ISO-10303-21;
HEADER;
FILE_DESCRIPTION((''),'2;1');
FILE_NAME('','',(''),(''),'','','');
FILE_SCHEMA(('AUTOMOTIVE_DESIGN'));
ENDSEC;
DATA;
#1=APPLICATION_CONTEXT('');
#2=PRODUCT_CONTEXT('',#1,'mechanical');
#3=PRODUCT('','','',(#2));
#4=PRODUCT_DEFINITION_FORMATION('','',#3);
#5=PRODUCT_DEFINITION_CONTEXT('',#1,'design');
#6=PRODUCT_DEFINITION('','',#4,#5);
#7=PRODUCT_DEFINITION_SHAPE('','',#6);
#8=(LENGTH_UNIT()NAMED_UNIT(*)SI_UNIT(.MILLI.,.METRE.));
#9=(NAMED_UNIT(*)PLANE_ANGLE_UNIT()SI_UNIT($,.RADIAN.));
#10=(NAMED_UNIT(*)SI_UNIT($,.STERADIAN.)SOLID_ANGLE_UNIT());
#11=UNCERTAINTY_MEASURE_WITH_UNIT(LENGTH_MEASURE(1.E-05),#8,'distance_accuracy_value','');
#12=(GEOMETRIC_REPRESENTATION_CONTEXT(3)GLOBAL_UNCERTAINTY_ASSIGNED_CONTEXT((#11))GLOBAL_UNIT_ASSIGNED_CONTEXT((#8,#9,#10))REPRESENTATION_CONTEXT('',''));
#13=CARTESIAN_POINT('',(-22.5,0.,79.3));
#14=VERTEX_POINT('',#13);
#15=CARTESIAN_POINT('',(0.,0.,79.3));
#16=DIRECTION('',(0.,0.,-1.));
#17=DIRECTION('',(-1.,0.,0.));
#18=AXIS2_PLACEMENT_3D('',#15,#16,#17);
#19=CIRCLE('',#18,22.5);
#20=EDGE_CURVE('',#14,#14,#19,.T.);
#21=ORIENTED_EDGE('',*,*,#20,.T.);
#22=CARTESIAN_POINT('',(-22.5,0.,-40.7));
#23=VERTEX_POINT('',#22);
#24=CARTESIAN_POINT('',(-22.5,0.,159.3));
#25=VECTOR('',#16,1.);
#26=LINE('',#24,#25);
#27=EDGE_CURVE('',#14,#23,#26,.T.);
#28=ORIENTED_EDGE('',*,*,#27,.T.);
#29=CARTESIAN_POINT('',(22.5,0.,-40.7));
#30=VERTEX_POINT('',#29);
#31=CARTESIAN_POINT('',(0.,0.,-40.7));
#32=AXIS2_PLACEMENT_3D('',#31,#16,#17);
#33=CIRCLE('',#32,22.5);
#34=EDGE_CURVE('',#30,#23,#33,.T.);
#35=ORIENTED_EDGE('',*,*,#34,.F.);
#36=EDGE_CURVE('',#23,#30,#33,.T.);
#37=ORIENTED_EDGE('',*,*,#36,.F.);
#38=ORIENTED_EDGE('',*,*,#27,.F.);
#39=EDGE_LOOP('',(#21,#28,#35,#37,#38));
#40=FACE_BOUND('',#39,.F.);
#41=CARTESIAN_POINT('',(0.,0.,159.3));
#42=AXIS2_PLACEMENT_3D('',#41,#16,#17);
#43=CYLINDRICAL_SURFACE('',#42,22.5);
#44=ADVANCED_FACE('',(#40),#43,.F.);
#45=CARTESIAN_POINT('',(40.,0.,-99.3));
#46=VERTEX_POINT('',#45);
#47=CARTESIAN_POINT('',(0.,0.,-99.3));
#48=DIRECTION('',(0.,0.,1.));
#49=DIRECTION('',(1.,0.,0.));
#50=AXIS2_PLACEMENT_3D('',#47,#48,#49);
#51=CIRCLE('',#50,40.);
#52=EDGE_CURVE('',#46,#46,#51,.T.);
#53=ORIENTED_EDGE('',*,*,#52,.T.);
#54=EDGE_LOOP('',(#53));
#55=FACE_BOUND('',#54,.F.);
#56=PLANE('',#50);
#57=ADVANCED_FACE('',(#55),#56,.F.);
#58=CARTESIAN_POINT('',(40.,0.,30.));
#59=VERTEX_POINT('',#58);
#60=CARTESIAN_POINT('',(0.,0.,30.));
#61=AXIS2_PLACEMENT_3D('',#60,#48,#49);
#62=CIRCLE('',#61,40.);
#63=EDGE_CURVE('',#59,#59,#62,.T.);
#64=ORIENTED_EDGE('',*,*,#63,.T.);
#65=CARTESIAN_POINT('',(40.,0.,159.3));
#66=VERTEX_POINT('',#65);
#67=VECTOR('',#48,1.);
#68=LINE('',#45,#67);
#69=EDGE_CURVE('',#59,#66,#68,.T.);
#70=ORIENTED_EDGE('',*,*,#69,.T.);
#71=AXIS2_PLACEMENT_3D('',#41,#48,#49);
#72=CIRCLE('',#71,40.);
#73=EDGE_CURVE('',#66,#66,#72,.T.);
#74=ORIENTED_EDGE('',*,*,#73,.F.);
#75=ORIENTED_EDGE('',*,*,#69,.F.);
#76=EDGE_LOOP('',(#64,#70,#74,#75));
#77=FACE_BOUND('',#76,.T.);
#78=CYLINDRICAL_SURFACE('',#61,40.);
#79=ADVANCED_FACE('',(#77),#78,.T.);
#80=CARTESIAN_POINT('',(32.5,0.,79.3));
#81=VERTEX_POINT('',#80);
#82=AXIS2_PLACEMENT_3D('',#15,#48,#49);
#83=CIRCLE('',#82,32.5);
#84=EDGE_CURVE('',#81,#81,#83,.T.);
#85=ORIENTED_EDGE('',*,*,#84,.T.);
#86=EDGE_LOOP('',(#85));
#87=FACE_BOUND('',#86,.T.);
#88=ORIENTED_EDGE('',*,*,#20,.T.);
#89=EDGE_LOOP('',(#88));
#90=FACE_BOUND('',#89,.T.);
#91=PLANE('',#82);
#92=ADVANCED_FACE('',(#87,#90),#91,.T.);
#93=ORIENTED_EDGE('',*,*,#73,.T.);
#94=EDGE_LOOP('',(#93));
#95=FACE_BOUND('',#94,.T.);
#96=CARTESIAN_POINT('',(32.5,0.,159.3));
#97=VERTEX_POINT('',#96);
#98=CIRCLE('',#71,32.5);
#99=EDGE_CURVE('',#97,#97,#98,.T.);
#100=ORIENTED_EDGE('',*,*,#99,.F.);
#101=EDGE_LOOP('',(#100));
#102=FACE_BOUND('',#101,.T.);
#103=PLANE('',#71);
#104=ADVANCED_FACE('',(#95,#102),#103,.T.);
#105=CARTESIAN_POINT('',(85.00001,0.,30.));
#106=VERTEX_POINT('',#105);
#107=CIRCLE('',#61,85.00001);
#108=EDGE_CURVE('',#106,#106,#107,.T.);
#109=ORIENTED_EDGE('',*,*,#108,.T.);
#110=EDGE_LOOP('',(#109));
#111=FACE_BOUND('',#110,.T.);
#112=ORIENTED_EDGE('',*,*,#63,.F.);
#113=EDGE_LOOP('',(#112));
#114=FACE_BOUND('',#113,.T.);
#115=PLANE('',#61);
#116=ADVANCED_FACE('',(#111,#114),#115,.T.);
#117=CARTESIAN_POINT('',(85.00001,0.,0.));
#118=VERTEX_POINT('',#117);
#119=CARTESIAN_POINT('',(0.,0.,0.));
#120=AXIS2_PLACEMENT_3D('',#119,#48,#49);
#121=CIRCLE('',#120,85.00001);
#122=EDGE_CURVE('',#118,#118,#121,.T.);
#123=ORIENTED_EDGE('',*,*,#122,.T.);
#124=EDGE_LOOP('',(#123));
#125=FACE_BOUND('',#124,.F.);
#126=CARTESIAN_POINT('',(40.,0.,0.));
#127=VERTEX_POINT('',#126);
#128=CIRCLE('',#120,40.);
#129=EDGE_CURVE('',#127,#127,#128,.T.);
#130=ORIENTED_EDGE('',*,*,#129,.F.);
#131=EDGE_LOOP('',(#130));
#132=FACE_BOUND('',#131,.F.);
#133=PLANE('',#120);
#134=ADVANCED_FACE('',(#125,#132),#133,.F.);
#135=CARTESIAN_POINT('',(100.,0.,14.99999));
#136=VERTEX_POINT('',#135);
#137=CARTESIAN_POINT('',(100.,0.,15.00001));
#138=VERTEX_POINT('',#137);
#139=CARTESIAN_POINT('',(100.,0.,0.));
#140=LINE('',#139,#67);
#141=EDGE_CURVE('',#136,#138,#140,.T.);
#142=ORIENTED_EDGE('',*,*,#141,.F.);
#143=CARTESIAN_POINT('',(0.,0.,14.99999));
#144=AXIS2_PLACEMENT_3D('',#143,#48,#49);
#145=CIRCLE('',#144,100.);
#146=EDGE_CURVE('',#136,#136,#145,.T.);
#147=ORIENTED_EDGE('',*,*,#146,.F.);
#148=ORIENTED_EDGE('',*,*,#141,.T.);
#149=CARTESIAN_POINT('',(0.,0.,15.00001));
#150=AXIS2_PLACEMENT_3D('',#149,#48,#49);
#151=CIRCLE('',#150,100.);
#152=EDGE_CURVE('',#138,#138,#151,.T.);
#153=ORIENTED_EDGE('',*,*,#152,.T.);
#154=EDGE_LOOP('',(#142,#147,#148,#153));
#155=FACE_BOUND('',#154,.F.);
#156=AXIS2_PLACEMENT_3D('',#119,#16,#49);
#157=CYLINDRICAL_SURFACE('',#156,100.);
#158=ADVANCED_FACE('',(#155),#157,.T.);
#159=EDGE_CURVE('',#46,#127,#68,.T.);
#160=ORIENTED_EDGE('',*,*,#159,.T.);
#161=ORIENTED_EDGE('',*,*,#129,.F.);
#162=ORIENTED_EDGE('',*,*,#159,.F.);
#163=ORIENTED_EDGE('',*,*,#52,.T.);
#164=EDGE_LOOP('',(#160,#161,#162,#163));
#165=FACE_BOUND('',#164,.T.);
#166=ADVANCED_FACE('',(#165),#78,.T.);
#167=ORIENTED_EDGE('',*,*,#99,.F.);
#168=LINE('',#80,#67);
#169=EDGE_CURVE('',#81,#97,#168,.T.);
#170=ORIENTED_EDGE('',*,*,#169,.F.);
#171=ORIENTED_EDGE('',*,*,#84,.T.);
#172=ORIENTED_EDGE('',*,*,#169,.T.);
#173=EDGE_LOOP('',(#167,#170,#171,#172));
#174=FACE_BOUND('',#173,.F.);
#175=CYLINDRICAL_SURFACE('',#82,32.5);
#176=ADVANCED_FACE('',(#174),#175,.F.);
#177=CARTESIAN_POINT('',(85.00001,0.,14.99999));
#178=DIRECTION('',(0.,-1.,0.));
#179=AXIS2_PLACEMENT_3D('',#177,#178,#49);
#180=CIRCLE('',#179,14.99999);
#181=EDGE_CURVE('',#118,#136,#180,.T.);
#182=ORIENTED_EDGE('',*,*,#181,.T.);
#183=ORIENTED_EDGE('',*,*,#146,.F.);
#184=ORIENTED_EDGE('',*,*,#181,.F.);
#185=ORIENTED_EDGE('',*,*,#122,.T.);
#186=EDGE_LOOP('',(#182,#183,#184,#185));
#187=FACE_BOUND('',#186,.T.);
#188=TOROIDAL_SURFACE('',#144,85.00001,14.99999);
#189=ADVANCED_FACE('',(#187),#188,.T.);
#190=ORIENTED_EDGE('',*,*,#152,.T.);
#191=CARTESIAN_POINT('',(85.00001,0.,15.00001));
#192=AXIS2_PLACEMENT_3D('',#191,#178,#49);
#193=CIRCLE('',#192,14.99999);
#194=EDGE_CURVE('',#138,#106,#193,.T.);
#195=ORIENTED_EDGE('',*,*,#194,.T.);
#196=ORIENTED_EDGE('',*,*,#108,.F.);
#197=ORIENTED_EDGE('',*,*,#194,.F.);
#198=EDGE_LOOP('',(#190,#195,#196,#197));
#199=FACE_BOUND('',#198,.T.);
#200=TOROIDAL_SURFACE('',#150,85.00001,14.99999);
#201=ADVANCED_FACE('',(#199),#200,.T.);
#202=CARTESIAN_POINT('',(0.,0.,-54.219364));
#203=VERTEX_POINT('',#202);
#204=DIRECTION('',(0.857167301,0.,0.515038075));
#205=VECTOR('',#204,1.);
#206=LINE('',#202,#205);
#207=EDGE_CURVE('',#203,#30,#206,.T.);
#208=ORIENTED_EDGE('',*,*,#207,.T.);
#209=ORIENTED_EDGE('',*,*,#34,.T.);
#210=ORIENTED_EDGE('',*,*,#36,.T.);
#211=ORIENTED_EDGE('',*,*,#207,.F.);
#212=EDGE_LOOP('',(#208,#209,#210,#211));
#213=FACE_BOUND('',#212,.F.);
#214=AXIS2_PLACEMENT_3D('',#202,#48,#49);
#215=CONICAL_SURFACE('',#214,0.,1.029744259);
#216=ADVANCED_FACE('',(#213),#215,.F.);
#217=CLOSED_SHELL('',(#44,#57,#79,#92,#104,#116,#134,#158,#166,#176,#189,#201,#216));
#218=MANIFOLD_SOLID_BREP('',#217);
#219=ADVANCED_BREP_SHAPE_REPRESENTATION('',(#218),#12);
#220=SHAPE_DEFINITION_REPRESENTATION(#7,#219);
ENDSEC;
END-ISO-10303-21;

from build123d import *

# Parameters (mm, degrees)
F0_R           = 100
F1_DEPTH       = 30
F2_R           = 40
F3_DEPTH       = 129.3
F4_R           = 14.99999
F6_D           = 45
F6_DEPTH       = 200
F6_CBORE_D     = 65
F6_CBORE_DEPTH = 80
F6_TIP         = 13.5193639281


# Not quite as in the source:
# - a fillet or chamfer is up to 0.001 mm smaller than in the source, because OpenCascade refuses the exact size


with BuildPart() as f1:
    # F0 (on Top) → F1 (new body)
    with BuildSketch(Plane.XY):
        Circle(F0_R)
    extrude(amount=F1_DEPTH)

    # F2 (on face) → F3 (join, symmetric)
    with BuildSketch(Plane.XY.offset(30)):
        Circle(F2_R)
    extrude(amount=F3_DEPTH, both=True)

    # F4 (radius 15 in the source; OpenCascade refuses exactly that, so slightly less here)
    f4_edges = [f1.edges().sort_by_distance(p)[0] for p in [
        (-100, 0, 30),
        (100, 0, 15),
        (-100, 0, 0),
    ]]
    fillet(f4_edges, radius=F4_R)

    # F6
    with Locations(Plane.XY.offset(159.3)):
        with Locations((0, 0)):
            CounterBoreHole(F6_D / 2, F6_CBORE_D / 2, F6_CBORE_DEPTH, depth=F6_DEPTH)
            with Locations((0, 0, -(F6_DEPTH + F6_TIP / 2))):  # 118° drill point
                Cone(0, F6_D / 2, F6_TIP, mode=Mode.SUBTRACT)


solid = f1.part
